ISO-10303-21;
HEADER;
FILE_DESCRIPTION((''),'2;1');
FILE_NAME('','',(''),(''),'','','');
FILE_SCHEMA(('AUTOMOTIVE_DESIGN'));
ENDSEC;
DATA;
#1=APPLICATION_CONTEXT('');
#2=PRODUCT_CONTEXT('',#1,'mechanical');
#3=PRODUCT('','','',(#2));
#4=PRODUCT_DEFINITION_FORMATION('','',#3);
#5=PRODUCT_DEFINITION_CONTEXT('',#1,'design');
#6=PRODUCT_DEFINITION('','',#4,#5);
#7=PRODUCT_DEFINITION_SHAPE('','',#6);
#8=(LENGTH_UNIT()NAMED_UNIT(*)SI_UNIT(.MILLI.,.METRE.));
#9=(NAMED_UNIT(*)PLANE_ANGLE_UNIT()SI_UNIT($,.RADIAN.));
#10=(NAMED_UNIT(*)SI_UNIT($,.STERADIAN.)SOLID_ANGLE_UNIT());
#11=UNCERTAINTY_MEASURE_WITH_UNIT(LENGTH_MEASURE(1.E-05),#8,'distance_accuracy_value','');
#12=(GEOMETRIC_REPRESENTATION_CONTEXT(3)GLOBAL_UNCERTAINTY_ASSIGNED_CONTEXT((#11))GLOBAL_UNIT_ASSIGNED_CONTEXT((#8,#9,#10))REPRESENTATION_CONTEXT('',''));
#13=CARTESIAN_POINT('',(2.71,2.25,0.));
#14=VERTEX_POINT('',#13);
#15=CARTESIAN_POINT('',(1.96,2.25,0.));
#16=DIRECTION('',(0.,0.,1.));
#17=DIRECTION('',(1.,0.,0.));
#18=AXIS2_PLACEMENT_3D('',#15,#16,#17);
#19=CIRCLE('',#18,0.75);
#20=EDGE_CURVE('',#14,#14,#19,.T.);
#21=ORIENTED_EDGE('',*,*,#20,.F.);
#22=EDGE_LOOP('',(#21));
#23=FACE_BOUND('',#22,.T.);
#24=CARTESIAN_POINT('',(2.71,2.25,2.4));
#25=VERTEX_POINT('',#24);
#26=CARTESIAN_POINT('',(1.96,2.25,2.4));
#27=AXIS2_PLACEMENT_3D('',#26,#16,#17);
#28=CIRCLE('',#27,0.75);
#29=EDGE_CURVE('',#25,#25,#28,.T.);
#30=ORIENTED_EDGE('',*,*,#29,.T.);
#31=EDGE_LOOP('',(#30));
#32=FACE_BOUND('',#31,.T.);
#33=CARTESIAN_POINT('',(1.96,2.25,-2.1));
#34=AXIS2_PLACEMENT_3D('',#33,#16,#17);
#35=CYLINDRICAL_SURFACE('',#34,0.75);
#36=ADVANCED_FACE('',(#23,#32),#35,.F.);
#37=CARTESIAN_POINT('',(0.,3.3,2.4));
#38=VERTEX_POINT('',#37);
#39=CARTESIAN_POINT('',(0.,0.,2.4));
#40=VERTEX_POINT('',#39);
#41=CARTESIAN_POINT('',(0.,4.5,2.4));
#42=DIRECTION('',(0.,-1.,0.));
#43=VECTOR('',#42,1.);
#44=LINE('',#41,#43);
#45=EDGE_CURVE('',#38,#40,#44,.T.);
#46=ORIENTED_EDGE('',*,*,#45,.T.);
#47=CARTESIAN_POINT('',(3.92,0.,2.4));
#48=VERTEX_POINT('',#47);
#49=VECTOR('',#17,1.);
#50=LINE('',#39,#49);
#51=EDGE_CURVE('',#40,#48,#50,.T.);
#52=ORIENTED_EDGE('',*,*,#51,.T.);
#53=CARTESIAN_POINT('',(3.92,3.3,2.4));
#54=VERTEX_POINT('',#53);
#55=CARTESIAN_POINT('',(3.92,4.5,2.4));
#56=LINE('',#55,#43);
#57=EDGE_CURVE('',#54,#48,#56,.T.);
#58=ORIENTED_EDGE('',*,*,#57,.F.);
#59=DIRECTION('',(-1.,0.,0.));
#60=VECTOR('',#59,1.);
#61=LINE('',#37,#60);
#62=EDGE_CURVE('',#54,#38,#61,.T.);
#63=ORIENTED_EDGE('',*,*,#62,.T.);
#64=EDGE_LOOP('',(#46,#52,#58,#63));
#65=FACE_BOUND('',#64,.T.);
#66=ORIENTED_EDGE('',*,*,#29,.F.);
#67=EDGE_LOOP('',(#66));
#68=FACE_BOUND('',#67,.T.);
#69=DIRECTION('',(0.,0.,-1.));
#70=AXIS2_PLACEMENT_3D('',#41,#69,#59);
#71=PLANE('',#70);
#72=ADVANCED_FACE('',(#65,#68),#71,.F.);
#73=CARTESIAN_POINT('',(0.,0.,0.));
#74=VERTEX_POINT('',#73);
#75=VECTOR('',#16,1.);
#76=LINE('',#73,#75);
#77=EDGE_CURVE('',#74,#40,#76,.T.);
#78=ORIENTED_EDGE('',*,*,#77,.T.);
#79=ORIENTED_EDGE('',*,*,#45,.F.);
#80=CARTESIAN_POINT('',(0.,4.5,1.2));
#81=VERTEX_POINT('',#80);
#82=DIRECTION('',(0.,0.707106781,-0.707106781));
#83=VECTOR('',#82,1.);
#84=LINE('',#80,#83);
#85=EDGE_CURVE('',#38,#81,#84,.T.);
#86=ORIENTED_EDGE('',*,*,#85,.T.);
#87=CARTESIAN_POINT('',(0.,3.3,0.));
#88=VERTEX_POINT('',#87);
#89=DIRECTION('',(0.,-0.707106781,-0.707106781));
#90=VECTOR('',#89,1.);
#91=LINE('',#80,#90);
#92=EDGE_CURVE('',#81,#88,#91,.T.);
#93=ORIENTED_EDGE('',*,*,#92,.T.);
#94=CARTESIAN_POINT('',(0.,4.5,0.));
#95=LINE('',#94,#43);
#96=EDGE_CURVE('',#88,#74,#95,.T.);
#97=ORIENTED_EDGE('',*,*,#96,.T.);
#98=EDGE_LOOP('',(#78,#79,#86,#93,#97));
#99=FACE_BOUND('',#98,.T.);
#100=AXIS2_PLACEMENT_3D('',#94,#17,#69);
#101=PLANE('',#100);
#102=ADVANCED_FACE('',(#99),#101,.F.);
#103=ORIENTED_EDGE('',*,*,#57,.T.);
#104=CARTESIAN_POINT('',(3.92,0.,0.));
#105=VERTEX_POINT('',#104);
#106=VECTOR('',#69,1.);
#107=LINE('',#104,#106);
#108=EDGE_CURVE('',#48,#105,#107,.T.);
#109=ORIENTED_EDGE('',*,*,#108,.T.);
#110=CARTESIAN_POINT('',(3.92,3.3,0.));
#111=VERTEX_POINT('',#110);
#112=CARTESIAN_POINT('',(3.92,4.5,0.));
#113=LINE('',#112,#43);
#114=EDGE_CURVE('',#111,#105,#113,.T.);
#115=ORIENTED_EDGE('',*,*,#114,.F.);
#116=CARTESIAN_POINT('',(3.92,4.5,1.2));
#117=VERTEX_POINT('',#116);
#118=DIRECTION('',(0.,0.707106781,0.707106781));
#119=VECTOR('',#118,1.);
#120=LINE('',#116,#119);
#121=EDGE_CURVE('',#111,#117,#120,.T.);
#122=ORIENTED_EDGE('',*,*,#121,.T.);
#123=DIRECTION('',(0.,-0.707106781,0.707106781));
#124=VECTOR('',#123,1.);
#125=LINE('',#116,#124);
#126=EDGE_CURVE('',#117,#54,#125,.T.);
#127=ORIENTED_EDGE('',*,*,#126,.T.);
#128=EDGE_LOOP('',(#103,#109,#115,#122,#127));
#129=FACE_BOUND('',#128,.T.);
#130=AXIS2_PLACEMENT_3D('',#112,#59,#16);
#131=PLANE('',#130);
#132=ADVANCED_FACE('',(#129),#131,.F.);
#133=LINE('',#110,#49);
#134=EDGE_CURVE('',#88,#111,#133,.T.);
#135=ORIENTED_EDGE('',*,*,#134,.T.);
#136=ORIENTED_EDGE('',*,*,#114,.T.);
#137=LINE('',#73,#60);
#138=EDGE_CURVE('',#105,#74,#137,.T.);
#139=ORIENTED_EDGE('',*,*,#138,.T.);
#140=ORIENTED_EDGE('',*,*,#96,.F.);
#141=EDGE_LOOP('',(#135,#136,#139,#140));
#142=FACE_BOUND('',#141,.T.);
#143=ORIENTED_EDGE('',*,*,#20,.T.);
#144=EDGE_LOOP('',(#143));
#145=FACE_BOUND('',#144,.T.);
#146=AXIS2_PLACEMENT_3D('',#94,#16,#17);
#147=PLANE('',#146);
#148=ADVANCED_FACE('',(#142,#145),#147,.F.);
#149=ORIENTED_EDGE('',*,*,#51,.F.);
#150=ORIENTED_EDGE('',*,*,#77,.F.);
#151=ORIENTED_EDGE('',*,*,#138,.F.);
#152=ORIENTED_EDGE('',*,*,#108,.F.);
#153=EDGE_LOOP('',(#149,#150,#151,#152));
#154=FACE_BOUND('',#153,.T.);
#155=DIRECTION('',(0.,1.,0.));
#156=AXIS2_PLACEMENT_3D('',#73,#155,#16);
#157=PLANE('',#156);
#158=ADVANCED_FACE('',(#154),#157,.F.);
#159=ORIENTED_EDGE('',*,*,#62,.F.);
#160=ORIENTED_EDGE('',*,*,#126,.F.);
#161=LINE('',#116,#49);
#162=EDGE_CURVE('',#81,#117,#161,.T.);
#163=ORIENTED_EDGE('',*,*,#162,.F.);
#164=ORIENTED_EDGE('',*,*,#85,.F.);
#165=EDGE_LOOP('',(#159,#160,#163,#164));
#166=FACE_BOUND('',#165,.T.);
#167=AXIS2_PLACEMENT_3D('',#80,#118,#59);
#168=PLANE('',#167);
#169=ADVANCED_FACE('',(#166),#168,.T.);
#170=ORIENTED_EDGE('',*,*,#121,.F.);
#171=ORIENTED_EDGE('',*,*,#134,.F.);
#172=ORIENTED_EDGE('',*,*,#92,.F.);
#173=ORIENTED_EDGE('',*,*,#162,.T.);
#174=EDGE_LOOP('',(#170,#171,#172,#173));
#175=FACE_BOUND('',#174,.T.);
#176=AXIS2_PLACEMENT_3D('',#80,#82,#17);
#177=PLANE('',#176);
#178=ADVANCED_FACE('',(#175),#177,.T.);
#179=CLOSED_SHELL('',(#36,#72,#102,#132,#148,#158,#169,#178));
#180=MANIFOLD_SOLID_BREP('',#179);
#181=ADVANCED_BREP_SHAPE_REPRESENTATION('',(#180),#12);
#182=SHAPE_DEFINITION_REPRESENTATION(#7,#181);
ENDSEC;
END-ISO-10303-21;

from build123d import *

# Parameters (mm, degrees)
SKETCH_1_W          = 3.92
SKETCH_1_H          = 2.4
EXTRUDE_1_DEPTH     = 4.5
SKETCH_2_R          = 0.75
CUT_EXTRUDE_1_DEPTH = 4.5
CHAMFER_1_SIZE      = 1.2


with BuildPart() as part:
    # 草图1 → 凸台-拉伸1 (new body)
    with BuildSketch(Plane(origin=(0, 0, 0), x_dir=(1, 0, 0), z_dir=(0, 1, 0))):
        with Locations((1.96, -1.2)):
            Rectangle(SKETCH_1_W, SKETCH_1_H)
    extrude(amount=EXTRUDE_1_DEPTH)

    # 草图2 → 切除-拉伸1 (cut)
    with BuildSketch(Plane.XY.offset(2.4)):
        with Locations((1.96, 2.25)):
            Circle(SKETCH_2_R)
    extrude(amount=-CUT_EXTRUDE_1_DEPTH, mode=Mode.SUBTRACT)

    # 倒角1
    chamfer_1_edges = [part.edges().sort_by_distance(p)[0] for p in [
        (1.96, 4.5, 0),
        (1.96, 4.5, 2.4),
    ]]
    chamfer(chamfer_1_edges, length=CHAMFER_1_SIZE - 0.0001)  # a hair under: the kernel refuses the full size


solid = part.part
